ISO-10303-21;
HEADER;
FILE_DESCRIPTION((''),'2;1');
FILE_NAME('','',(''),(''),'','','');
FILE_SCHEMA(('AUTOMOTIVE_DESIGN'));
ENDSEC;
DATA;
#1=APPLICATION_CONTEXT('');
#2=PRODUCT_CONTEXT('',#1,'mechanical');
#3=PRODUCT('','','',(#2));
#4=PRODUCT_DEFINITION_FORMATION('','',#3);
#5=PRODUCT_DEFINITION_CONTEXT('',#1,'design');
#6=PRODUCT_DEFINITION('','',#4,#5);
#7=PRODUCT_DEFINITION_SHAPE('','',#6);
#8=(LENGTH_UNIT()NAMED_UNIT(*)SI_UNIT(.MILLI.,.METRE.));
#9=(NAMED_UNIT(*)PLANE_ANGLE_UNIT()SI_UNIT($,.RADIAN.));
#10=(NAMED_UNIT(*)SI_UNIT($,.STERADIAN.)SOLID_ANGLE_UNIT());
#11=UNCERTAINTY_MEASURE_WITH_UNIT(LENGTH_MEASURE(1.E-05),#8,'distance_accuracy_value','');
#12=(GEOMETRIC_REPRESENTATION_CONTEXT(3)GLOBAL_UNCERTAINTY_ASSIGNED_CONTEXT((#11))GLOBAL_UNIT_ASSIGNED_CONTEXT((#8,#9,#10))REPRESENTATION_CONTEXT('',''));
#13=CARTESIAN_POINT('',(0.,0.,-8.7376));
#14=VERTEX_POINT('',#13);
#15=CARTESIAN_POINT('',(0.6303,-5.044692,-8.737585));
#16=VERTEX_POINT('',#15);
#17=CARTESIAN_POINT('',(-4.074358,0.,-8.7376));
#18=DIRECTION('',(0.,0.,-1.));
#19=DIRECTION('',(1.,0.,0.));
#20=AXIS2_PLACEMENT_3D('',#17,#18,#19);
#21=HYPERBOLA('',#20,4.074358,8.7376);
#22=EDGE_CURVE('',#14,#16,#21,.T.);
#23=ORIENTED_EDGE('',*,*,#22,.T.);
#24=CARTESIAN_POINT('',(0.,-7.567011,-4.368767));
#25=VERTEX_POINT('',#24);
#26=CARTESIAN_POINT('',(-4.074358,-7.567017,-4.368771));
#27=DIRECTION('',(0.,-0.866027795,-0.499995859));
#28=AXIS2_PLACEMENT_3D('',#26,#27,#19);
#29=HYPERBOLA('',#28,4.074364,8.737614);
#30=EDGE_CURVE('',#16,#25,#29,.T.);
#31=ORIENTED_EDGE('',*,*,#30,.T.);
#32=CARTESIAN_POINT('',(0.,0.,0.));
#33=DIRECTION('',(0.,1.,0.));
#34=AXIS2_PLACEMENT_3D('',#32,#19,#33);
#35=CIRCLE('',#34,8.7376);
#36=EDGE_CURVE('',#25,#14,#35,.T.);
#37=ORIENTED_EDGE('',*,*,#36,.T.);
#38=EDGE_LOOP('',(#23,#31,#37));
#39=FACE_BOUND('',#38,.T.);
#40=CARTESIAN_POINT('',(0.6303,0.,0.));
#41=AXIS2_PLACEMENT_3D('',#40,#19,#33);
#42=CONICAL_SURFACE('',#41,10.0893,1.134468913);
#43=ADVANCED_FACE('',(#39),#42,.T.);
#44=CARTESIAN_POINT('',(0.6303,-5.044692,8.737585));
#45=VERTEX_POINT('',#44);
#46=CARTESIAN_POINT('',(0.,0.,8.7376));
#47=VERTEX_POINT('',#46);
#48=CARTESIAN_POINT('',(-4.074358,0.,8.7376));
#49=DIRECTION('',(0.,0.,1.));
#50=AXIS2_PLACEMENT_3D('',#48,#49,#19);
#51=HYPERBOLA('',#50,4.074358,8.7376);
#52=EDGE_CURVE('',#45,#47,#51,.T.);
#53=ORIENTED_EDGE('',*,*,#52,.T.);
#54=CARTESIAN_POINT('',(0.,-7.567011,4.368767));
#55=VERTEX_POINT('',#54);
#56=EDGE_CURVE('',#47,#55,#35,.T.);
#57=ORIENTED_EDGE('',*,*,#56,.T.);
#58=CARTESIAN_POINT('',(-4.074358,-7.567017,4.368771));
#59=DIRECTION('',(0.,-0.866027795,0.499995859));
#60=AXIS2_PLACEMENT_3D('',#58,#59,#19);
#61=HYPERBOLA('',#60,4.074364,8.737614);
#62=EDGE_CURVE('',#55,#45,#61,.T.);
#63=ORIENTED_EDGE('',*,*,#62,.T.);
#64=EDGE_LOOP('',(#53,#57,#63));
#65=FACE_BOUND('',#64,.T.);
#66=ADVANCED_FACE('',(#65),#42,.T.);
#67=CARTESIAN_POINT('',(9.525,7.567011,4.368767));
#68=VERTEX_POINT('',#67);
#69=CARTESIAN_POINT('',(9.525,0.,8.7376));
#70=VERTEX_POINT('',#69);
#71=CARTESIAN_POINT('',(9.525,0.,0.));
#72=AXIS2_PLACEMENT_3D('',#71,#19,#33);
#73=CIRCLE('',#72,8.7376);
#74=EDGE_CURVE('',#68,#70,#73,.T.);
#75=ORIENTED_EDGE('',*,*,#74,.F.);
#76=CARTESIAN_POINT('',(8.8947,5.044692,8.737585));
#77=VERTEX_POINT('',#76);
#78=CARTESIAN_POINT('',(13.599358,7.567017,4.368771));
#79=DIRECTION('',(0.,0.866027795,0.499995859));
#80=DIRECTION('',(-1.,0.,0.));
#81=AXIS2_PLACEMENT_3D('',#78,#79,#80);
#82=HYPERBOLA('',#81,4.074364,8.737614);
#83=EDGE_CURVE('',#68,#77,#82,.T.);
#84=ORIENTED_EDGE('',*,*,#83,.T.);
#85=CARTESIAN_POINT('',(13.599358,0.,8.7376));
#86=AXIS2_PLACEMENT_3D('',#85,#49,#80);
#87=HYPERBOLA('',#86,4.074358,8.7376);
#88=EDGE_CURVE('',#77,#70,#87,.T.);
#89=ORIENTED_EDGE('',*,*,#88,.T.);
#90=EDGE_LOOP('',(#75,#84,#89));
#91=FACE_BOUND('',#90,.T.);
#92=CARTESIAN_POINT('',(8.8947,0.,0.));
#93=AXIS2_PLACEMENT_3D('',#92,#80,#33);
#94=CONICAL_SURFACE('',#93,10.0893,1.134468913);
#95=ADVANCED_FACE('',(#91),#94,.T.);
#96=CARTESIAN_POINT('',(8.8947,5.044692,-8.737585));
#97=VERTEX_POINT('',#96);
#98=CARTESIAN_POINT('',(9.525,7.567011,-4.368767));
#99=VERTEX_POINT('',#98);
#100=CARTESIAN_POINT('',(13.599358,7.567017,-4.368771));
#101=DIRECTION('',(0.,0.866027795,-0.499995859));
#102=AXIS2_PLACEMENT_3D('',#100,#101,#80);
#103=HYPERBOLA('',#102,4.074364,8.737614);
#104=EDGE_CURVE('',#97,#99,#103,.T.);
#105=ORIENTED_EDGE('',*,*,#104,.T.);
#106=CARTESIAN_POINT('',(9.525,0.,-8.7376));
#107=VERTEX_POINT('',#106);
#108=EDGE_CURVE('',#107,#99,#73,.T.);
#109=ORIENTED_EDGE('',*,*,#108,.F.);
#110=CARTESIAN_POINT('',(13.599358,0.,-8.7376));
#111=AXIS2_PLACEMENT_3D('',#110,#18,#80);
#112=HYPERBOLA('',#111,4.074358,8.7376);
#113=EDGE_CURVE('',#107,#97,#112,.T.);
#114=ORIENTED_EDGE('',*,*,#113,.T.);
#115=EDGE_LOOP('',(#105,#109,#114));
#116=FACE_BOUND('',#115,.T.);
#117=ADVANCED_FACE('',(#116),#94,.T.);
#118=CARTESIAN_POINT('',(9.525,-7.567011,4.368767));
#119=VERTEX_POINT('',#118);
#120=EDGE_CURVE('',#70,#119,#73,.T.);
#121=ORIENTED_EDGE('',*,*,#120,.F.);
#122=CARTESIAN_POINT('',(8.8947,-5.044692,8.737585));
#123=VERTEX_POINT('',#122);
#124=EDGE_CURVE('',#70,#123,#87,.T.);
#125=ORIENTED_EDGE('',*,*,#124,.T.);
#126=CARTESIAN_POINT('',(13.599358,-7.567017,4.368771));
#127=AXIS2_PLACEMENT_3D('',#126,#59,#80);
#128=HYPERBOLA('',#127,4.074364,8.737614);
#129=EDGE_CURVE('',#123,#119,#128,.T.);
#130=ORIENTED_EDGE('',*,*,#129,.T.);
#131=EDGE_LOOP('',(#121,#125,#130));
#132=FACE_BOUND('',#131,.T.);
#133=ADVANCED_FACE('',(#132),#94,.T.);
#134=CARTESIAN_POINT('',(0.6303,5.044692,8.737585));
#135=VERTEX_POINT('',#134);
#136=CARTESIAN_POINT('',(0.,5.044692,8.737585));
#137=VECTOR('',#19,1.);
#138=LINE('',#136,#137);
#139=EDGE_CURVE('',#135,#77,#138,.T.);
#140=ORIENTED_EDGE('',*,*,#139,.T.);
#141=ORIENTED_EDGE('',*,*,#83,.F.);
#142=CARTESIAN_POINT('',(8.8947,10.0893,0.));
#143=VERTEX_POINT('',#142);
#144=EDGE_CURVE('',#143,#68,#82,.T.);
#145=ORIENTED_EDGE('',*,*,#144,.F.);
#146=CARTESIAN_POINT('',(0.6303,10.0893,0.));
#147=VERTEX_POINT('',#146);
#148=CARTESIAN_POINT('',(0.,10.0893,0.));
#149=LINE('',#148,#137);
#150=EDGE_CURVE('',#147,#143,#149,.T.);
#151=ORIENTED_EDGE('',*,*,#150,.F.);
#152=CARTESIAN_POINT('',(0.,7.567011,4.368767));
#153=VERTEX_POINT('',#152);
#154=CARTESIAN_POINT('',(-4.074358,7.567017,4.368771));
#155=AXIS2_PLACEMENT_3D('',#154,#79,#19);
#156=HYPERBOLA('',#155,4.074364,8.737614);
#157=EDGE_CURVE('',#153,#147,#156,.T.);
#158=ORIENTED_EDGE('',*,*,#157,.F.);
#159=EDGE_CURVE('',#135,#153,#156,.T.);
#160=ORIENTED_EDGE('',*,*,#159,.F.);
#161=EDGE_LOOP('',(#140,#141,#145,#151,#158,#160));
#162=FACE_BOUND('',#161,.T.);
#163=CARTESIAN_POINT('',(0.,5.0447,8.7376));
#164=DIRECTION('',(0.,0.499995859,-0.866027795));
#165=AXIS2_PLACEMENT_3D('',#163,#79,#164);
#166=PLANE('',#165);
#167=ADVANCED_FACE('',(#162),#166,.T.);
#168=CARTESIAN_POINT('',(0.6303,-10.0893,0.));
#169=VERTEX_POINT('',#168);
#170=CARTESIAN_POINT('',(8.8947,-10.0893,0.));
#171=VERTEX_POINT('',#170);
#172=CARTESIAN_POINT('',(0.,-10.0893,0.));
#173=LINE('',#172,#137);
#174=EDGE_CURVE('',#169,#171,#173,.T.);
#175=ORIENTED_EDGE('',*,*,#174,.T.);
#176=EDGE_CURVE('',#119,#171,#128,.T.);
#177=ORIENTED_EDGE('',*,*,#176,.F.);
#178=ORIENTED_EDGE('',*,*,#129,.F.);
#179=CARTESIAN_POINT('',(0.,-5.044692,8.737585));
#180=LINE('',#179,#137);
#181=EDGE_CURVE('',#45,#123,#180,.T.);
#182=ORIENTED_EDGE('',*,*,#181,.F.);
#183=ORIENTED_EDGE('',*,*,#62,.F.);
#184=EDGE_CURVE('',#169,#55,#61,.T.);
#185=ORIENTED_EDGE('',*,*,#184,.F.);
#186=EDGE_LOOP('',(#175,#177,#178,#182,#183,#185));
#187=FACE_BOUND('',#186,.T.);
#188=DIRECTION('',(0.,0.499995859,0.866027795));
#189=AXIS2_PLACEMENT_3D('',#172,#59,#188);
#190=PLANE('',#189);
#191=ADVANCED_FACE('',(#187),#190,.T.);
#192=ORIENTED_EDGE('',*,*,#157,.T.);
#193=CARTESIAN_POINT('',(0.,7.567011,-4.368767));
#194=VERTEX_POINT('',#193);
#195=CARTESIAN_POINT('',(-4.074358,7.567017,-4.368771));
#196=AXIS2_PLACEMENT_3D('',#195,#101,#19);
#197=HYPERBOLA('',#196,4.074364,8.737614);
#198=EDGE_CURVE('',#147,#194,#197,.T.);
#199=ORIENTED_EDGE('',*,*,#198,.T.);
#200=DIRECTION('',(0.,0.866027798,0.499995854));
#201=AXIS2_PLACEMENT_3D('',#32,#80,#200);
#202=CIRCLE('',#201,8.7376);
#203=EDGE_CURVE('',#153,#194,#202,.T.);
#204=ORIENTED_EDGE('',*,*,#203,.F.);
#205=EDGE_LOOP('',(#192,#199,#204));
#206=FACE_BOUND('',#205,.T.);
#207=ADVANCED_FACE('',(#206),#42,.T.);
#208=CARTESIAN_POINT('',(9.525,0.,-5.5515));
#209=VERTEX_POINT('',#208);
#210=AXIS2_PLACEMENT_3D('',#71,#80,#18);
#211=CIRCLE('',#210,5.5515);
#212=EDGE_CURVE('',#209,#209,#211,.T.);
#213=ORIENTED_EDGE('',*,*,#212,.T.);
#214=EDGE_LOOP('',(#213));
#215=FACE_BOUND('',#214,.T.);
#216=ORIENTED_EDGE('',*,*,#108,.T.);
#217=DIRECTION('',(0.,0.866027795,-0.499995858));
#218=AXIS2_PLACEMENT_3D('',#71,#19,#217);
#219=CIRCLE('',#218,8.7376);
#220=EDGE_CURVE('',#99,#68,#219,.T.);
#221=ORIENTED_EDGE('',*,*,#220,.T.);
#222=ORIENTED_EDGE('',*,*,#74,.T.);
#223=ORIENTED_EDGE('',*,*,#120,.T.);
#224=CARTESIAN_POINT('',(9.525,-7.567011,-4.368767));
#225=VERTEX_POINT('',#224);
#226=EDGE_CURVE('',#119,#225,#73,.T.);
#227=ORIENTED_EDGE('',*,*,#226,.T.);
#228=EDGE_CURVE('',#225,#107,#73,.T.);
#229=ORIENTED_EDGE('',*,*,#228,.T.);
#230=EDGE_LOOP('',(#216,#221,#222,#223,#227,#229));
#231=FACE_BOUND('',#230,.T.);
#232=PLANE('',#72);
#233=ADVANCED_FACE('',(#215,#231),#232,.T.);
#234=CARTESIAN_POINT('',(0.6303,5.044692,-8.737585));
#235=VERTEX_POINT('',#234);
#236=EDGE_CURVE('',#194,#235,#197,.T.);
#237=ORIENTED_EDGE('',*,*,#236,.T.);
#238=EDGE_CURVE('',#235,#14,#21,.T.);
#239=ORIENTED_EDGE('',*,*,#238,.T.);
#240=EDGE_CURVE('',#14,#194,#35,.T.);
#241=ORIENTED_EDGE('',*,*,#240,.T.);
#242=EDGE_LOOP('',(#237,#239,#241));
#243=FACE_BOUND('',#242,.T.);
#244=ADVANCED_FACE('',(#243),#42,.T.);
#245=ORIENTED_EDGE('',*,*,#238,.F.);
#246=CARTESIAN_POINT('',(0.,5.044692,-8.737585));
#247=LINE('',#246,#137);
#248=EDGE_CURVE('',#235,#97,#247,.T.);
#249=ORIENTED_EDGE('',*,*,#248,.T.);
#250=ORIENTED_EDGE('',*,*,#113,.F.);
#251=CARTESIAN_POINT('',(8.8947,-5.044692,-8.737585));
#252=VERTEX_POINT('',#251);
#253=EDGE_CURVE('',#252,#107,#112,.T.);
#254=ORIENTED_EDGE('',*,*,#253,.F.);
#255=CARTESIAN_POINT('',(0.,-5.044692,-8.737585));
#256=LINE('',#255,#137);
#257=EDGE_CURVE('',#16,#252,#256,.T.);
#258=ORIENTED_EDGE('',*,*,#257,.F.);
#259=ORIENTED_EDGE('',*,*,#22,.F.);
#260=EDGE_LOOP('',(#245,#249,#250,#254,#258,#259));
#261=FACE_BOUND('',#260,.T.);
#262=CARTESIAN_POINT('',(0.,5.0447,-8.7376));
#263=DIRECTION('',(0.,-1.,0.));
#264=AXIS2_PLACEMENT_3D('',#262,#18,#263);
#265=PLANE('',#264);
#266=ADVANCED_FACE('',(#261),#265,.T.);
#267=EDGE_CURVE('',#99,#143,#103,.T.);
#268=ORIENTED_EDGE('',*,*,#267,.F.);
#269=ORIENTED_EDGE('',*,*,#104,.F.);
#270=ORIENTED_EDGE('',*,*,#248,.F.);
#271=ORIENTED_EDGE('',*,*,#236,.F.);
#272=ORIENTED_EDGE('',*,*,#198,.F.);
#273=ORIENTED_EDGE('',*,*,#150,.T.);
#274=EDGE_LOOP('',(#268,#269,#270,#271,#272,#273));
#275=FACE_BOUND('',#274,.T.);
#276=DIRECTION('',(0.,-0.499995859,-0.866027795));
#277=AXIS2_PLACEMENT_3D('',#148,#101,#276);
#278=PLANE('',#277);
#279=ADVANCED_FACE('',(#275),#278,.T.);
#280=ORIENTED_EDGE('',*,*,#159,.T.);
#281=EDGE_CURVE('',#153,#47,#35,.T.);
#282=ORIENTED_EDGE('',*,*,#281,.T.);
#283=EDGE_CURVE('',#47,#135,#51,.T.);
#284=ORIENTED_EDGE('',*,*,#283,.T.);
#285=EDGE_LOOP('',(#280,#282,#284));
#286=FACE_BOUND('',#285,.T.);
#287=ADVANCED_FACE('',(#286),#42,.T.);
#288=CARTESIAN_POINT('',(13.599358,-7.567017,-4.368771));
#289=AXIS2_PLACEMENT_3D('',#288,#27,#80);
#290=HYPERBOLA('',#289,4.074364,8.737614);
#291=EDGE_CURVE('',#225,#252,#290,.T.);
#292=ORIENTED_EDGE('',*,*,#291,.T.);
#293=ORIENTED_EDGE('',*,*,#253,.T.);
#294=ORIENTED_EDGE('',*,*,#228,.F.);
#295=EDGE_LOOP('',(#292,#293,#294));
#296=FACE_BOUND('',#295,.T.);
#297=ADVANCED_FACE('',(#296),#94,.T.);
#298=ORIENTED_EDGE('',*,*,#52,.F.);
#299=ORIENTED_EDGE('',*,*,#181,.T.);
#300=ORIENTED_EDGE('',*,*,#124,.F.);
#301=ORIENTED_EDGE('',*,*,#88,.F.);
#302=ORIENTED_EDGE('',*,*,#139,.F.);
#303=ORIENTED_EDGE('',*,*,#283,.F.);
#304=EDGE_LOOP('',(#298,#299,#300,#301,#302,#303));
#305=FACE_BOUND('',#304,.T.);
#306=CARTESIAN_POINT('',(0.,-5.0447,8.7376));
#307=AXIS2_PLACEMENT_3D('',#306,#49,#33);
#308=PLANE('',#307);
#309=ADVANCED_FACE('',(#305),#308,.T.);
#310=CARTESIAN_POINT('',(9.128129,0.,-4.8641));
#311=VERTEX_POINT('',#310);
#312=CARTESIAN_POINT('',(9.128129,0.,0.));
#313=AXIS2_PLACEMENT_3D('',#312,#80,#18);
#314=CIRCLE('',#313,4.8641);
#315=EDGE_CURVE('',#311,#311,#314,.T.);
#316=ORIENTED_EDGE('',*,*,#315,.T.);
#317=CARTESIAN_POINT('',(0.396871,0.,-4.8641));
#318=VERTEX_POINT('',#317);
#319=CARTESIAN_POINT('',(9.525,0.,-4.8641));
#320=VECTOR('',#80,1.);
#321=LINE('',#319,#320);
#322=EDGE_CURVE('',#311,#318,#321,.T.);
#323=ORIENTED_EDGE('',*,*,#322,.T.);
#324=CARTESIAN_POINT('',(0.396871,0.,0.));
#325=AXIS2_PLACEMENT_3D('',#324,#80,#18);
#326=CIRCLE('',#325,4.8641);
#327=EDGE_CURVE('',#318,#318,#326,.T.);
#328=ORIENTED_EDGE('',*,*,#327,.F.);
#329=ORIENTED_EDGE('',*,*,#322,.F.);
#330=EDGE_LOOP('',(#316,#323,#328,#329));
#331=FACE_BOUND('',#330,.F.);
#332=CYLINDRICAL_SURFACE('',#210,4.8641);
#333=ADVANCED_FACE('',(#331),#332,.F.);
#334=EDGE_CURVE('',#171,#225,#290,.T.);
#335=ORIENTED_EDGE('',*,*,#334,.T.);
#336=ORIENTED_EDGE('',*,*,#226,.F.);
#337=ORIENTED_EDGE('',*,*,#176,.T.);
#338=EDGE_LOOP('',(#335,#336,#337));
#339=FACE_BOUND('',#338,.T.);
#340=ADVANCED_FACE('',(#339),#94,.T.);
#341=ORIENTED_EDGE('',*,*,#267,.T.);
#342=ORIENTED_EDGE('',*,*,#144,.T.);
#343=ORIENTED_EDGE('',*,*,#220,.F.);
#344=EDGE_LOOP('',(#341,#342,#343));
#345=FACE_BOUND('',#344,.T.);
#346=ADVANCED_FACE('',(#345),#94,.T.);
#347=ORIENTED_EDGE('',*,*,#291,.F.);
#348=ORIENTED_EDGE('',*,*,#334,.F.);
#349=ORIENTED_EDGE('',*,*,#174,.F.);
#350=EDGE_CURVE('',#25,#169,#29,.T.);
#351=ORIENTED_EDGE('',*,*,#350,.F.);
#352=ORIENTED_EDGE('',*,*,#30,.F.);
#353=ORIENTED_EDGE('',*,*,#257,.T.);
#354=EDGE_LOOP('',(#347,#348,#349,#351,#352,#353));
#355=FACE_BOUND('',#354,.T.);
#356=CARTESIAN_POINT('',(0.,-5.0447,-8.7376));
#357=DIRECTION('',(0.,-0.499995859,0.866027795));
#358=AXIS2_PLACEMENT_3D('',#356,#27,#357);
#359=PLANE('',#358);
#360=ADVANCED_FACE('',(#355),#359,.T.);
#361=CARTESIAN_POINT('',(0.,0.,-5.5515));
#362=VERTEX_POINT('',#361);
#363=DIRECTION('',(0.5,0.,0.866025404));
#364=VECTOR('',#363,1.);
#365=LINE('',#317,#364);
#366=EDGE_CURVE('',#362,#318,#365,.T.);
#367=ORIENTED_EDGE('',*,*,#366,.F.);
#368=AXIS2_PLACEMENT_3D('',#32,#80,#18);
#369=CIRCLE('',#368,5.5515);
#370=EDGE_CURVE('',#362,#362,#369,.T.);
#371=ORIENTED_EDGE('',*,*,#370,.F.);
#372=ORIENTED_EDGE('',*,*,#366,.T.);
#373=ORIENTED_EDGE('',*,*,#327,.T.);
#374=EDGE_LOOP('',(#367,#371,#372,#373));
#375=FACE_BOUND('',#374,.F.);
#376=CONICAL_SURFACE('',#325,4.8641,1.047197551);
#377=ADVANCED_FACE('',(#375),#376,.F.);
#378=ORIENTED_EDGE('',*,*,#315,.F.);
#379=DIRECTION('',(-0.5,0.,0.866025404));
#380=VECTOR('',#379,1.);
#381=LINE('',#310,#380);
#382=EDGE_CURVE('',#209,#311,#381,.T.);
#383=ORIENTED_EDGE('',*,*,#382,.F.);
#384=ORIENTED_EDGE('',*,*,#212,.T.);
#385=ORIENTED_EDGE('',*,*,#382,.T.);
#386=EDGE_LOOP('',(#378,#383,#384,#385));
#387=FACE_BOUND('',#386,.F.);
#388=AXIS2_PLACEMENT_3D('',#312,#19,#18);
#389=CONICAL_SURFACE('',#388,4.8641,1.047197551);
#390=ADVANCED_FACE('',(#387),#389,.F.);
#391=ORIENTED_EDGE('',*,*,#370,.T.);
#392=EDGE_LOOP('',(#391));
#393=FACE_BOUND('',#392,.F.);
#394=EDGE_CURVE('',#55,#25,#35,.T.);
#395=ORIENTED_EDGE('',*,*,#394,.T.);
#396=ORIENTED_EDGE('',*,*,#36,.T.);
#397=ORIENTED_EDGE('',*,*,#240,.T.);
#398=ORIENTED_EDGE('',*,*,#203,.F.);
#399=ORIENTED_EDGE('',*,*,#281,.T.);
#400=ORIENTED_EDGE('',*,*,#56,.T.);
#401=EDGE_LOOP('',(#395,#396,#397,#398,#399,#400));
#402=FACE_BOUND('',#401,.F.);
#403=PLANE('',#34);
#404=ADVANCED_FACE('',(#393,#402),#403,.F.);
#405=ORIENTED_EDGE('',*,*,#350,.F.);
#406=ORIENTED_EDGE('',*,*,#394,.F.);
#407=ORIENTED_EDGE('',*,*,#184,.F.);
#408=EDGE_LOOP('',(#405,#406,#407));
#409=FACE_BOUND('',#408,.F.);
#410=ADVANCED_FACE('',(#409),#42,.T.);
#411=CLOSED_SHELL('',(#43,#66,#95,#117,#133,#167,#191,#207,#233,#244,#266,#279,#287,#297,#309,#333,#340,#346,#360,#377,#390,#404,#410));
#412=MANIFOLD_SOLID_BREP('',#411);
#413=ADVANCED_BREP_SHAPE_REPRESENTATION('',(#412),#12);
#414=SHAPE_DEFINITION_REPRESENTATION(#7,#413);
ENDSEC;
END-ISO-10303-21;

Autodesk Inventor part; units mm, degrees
ref_plane "YZ Plane" through (0, 0, 0) normal (1, 0, 0) x (0, 1, 0)
ref_plane "XZ Plane" through (0, 0, 0) normal (0, 1, 0) x (-1, 0, 0)
sketch "Sketch1" plane through (0, 0, 0) normal (1, 0, 0) x (0, 1, 0)
  line L0 (-10.0893, 0) -> (-5.0447, 8.7376)
  line L1 (-5.0447, 8.7376) -> (5.0447, 8.7376)
  line L2 (5.0447, 8.7376) -> (10.0893, 0)
  line L3 (10.0893, 0) -> (5.0447, -8.7376)
  line L4 (5.0447, -8.7376) -> (-5.0447, -8.7376)
  line L5 (-5.0447, -8.7376) -> (-10.0893, 0)
  point P0 (0, 0)
  point P1 (0, 0)
  dimension "d0" = 20.1786
extrude "Body" add sketch "Sketch1" along normal blind 9.525
sketch "Sketch2" plane through (0, 0, 0) normal (0, 0, 1) x (1, 0, 0)
  line L0 (0, 5.0447) -> (0, 10.0893) projected
  line L1 (0, 10.0893) -> (9.525, 10.0893) projected
  line L2 (9.525, 5.0447) -> (9.525, 10.0893) projected
  line L3 (-1.905, 0) -> (11.43, 0) projected
  line L4 (0.6303, 10.0893) -> (0, 8.7376)
  line L5 (8.8947, 10.0893) -> (9.525, 8.7376)
  dimension "d3" = 25
  dimension "d4" = 25
  dimension "d5" = 17.4752
  dimension "d6" = 17.4752
revolve "Chamfer1" cut sketch "Sketch2" angle 360 about axis through (-10, 0, 0) along (1, 0, 0)
sketch "Sketch3" plane through (9.525, 0, 0) normal (1, 0, 0) x (0, 0, -1)
  arc A0 (-4.3688, -7.567) -> (4.3688, -7.567) centre (0, 0) ccw projected
hole "Thread" at (9.525, 0, 0) direction (-1, 0, 0) diameter 9.7282 end through all thread size "7/16-20 UNF" class "2B" standard "ANSI Unified Screw Threads"
chamfer "Chamfer2" distance 0.6874 angle 30 1 edges at (9.525, 0, 4.8641) measured on face at (9.525, 7.4027, -0.1954)
chamfer "Chamfer3" distance 0.6874 angle 30 1 edges at (0, 0, 4.8641) measured on face at (0, 7.4027, -0.1954)
ref_plane "Work Plane1" through (-18.8173, 0, 0) normal (0, -0.8660254, -0.5) x (1, 0, 0)
equation "\"d0\" = 1.1547 * SW"
equation "\"d1\" = KOH"
equation "\"d3\" = ANG1"
equation "\"d4\" = ANG2"
equation "\"d5\" = SW0"
equation "\"d6\" = SW01"
equation "\"d8\" = -0.5 * GD1 + 0.5 * NND"
equation "\"d40\" = -0.5 * GD1 + 0.5 * NND"
equation "\"d10\" = -0.5 * GD1 + 0.5 * NND"
equation "\"d41\" = -0.5 * GD1 + 0.5 * NND"
equation "\"ANG1\" = 25deg"
equation "\"ANG2\" = 25deg"
equation "\"NND\" = 11.1125"
equation "\"KOH\" = 9.525"
equation "\"SW\" = 17.4752"
equation "\"SW0\" = SW"
equation "\"SW01\" = SW"
equation "\"THREADDIA\" = 11.1125"
equation "\"TOA\" = 30deg"
equation "\"E0\" = 1.155 * SW"
equation "\"GD1\" = 9.737685"
properties part number "ANSI B18.2.2 - 7/16 - 20" material "Steel, Mild"
